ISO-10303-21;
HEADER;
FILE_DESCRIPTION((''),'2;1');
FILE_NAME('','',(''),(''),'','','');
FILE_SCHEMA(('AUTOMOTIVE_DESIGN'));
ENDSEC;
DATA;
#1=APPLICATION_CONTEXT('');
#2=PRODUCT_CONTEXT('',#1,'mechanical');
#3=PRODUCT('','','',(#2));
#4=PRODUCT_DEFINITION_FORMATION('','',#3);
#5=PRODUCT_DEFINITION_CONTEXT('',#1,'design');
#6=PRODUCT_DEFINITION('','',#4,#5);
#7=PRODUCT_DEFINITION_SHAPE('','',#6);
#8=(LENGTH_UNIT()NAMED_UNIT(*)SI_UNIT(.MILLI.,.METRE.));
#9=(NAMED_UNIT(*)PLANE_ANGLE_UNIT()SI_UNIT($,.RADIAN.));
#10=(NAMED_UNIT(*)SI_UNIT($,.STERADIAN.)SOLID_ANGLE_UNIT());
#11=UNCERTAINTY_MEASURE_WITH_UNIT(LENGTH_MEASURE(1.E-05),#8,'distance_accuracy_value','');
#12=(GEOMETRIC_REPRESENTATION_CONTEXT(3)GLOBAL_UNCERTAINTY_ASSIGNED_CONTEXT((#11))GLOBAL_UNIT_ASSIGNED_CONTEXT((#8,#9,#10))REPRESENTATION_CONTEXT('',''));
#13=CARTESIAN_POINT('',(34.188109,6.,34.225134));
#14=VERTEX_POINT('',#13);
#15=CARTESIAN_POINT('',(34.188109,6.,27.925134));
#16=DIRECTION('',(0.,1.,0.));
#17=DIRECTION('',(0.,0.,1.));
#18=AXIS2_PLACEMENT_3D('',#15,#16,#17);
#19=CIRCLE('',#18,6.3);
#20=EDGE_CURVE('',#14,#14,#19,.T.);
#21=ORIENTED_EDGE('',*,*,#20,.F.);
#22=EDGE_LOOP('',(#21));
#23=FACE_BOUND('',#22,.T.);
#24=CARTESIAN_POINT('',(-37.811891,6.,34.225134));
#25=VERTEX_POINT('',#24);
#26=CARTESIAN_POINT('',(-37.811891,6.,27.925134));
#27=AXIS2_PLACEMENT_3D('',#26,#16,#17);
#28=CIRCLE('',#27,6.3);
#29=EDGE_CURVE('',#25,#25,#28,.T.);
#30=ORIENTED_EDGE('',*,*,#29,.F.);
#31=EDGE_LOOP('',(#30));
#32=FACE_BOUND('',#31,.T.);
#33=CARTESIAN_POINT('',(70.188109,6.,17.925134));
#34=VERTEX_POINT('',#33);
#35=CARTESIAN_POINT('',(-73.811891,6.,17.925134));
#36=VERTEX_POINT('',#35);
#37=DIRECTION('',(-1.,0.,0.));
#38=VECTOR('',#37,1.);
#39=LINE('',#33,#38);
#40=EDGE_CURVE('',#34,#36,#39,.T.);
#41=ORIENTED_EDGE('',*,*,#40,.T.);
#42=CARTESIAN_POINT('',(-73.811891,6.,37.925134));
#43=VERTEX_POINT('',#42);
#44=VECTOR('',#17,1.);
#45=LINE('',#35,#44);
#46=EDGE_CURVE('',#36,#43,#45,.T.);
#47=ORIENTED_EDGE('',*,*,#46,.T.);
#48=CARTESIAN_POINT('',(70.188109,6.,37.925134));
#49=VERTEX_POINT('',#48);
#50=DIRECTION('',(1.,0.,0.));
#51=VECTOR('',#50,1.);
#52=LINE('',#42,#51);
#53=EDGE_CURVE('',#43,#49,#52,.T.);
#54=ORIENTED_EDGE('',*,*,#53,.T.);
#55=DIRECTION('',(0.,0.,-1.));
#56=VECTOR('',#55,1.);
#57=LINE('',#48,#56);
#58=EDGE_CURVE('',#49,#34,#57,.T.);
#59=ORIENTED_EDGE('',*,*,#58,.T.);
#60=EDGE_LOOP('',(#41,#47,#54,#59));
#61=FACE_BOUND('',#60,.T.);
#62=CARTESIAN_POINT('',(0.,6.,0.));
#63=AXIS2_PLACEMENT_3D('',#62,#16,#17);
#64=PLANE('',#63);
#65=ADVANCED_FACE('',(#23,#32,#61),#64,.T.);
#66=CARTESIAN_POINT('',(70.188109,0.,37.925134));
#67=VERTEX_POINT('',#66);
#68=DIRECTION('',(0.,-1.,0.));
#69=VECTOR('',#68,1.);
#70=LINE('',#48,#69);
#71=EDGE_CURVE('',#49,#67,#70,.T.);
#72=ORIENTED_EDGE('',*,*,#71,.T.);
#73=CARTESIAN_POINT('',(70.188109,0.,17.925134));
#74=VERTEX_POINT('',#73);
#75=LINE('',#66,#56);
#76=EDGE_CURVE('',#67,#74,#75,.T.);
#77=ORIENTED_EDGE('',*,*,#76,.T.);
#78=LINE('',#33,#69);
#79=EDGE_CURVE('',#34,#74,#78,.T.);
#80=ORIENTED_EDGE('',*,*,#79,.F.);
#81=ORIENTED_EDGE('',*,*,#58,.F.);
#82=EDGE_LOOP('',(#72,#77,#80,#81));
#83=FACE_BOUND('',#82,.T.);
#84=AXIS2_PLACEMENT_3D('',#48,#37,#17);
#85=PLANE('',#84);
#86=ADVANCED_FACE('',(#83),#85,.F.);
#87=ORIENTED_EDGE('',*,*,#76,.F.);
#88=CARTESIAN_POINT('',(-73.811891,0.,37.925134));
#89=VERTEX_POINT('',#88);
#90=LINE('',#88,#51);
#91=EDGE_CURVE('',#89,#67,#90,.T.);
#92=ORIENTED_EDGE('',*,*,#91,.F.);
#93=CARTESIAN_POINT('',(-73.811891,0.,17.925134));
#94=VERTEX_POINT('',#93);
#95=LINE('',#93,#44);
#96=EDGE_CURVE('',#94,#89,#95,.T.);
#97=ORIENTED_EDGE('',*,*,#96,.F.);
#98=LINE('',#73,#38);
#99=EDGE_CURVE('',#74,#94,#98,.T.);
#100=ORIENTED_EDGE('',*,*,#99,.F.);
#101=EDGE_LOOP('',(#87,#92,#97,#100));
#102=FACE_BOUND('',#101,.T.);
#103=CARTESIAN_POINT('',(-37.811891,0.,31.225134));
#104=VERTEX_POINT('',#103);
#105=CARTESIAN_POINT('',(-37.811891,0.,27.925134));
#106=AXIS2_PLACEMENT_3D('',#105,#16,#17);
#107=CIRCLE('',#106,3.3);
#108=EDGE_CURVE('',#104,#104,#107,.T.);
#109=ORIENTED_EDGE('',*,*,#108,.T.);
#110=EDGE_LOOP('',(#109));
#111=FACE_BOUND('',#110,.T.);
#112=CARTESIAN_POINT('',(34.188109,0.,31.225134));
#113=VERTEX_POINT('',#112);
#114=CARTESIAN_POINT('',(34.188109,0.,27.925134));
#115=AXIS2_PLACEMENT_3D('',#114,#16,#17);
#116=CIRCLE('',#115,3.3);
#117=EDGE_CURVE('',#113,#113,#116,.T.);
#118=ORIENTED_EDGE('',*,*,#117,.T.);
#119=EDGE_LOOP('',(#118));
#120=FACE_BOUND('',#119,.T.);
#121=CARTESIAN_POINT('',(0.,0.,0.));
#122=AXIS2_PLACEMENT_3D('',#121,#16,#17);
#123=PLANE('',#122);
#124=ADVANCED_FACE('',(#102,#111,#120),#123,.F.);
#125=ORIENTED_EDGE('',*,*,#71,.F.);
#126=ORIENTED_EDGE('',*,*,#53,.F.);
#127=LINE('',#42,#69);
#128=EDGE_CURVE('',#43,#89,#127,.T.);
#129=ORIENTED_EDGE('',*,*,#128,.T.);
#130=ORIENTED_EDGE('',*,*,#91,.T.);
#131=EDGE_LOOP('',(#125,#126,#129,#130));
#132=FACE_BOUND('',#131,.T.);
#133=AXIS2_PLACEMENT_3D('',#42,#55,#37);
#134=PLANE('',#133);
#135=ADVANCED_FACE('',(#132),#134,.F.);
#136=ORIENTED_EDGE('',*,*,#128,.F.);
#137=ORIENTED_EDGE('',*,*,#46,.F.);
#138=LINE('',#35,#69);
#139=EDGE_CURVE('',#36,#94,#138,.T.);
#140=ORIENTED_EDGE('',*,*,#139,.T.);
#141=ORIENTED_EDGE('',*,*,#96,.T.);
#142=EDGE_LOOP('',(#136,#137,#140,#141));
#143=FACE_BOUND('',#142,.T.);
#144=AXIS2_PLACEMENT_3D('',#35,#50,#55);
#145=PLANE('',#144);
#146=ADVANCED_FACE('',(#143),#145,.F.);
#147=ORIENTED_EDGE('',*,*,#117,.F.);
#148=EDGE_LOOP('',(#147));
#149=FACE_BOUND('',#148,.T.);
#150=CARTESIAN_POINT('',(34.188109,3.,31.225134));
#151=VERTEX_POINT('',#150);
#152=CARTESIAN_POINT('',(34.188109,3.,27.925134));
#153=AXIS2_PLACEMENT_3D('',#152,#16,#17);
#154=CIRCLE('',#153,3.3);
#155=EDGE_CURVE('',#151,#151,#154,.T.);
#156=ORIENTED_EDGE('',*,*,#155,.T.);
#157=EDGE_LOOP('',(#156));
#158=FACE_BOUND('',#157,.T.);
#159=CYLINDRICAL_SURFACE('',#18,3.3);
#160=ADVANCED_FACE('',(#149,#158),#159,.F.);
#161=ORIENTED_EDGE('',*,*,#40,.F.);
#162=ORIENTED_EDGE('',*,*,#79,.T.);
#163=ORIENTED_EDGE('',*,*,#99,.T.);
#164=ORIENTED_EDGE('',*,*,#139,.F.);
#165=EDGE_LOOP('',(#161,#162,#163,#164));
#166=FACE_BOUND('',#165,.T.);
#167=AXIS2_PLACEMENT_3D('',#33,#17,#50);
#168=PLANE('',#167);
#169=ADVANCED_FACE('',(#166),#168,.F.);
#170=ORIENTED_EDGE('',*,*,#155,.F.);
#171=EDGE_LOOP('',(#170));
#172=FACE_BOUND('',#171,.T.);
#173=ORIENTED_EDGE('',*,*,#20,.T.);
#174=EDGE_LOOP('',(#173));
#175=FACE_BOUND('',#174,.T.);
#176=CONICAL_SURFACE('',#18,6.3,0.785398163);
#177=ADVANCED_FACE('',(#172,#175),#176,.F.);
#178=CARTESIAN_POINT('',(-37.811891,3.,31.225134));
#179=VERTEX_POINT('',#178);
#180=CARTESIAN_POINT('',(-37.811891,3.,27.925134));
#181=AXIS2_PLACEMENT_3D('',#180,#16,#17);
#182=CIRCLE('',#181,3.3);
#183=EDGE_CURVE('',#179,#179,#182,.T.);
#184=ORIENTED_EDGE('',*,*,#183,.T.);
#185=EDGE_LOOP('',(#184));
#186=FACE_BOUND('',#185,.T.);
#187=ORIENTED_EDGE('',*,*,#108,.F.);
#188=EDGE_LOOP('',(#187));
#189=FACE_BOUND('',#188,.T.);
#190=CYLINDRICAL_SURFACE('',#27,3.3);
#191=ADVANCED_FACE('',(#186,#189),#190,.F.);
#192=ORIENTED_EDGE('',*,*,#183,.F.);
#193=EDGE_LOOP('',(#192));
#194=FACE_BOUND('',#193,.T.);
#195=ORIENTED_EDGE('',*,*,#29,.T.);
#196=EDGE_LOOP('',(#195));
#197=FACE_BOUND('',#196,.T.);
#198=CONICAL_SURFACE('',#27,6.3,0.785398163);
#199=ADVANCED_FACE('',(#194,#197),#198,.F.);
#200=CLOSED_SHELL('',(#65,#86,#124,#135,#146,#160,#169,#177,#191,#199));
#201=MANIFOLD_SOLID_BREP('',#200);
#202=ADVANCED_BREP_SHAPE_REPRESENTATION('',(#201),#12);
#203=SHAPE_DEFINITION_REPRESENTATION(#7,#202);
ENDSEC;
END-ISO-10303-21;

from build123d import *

# Parameters (mm, degrees)
IZIM1_W                     = 144
IZIM1_H                     = 20
Y_KSEKLIK_EKSTR_ZYON1_DEPTH = 6


# Read off the part's stored shape, not the designer's step: Delik1
with BuildPart() as part:
    # Çizim1 → Yükseklik-Ekstrüzyon1 (new body)
    with BuildSketch(Plane(origin=(0, 0, 0), x_dir=(1, 0, 0), z_dir=(0, 1, 0))):
        with Locations((-1.811890532, -27.92513369)):
            Rectangle(IZIM1_W, IZIM1_H)
    extrude(amount=Y_KSEKLIK_EKSTR_ZYON1_DEPTH)

    # Delik1 outline → Delik1 (revolve, cut)
    with BuildSketch(Plane(origin=(34.188109468, 0, 27.92513369), x_dir=(1, 0, 0), z_dir=(0, 0, 1))):
        Polygon((0, 0), (3.3, 0), (3.3, 3), (6.3, 6), (0, 6), align=None)
    revolve(axis=Axis((34.188109468, 0, 27.92513369), (0, 1, 0)), mode=Mode.SUBTRACT)

    # Delik1 2 outline → Delik1 2 (revolve, cut)
    with BuildSketch(Plane(origin=(-37.811890532, 0, 27.92513369), x_dir=(1, 0, 0), z_dir=(0, 0, 1))):
        Polygon((0, 0), (3.3, 0), (3.3, 3), (6.3, 6), (0, 6), align=None)
    revolve(axis=Axis((-37.811890532, 0, 27.92513369), (0, 1, 0)), mode=Mode.SUBTRACT)


solid = part.part
